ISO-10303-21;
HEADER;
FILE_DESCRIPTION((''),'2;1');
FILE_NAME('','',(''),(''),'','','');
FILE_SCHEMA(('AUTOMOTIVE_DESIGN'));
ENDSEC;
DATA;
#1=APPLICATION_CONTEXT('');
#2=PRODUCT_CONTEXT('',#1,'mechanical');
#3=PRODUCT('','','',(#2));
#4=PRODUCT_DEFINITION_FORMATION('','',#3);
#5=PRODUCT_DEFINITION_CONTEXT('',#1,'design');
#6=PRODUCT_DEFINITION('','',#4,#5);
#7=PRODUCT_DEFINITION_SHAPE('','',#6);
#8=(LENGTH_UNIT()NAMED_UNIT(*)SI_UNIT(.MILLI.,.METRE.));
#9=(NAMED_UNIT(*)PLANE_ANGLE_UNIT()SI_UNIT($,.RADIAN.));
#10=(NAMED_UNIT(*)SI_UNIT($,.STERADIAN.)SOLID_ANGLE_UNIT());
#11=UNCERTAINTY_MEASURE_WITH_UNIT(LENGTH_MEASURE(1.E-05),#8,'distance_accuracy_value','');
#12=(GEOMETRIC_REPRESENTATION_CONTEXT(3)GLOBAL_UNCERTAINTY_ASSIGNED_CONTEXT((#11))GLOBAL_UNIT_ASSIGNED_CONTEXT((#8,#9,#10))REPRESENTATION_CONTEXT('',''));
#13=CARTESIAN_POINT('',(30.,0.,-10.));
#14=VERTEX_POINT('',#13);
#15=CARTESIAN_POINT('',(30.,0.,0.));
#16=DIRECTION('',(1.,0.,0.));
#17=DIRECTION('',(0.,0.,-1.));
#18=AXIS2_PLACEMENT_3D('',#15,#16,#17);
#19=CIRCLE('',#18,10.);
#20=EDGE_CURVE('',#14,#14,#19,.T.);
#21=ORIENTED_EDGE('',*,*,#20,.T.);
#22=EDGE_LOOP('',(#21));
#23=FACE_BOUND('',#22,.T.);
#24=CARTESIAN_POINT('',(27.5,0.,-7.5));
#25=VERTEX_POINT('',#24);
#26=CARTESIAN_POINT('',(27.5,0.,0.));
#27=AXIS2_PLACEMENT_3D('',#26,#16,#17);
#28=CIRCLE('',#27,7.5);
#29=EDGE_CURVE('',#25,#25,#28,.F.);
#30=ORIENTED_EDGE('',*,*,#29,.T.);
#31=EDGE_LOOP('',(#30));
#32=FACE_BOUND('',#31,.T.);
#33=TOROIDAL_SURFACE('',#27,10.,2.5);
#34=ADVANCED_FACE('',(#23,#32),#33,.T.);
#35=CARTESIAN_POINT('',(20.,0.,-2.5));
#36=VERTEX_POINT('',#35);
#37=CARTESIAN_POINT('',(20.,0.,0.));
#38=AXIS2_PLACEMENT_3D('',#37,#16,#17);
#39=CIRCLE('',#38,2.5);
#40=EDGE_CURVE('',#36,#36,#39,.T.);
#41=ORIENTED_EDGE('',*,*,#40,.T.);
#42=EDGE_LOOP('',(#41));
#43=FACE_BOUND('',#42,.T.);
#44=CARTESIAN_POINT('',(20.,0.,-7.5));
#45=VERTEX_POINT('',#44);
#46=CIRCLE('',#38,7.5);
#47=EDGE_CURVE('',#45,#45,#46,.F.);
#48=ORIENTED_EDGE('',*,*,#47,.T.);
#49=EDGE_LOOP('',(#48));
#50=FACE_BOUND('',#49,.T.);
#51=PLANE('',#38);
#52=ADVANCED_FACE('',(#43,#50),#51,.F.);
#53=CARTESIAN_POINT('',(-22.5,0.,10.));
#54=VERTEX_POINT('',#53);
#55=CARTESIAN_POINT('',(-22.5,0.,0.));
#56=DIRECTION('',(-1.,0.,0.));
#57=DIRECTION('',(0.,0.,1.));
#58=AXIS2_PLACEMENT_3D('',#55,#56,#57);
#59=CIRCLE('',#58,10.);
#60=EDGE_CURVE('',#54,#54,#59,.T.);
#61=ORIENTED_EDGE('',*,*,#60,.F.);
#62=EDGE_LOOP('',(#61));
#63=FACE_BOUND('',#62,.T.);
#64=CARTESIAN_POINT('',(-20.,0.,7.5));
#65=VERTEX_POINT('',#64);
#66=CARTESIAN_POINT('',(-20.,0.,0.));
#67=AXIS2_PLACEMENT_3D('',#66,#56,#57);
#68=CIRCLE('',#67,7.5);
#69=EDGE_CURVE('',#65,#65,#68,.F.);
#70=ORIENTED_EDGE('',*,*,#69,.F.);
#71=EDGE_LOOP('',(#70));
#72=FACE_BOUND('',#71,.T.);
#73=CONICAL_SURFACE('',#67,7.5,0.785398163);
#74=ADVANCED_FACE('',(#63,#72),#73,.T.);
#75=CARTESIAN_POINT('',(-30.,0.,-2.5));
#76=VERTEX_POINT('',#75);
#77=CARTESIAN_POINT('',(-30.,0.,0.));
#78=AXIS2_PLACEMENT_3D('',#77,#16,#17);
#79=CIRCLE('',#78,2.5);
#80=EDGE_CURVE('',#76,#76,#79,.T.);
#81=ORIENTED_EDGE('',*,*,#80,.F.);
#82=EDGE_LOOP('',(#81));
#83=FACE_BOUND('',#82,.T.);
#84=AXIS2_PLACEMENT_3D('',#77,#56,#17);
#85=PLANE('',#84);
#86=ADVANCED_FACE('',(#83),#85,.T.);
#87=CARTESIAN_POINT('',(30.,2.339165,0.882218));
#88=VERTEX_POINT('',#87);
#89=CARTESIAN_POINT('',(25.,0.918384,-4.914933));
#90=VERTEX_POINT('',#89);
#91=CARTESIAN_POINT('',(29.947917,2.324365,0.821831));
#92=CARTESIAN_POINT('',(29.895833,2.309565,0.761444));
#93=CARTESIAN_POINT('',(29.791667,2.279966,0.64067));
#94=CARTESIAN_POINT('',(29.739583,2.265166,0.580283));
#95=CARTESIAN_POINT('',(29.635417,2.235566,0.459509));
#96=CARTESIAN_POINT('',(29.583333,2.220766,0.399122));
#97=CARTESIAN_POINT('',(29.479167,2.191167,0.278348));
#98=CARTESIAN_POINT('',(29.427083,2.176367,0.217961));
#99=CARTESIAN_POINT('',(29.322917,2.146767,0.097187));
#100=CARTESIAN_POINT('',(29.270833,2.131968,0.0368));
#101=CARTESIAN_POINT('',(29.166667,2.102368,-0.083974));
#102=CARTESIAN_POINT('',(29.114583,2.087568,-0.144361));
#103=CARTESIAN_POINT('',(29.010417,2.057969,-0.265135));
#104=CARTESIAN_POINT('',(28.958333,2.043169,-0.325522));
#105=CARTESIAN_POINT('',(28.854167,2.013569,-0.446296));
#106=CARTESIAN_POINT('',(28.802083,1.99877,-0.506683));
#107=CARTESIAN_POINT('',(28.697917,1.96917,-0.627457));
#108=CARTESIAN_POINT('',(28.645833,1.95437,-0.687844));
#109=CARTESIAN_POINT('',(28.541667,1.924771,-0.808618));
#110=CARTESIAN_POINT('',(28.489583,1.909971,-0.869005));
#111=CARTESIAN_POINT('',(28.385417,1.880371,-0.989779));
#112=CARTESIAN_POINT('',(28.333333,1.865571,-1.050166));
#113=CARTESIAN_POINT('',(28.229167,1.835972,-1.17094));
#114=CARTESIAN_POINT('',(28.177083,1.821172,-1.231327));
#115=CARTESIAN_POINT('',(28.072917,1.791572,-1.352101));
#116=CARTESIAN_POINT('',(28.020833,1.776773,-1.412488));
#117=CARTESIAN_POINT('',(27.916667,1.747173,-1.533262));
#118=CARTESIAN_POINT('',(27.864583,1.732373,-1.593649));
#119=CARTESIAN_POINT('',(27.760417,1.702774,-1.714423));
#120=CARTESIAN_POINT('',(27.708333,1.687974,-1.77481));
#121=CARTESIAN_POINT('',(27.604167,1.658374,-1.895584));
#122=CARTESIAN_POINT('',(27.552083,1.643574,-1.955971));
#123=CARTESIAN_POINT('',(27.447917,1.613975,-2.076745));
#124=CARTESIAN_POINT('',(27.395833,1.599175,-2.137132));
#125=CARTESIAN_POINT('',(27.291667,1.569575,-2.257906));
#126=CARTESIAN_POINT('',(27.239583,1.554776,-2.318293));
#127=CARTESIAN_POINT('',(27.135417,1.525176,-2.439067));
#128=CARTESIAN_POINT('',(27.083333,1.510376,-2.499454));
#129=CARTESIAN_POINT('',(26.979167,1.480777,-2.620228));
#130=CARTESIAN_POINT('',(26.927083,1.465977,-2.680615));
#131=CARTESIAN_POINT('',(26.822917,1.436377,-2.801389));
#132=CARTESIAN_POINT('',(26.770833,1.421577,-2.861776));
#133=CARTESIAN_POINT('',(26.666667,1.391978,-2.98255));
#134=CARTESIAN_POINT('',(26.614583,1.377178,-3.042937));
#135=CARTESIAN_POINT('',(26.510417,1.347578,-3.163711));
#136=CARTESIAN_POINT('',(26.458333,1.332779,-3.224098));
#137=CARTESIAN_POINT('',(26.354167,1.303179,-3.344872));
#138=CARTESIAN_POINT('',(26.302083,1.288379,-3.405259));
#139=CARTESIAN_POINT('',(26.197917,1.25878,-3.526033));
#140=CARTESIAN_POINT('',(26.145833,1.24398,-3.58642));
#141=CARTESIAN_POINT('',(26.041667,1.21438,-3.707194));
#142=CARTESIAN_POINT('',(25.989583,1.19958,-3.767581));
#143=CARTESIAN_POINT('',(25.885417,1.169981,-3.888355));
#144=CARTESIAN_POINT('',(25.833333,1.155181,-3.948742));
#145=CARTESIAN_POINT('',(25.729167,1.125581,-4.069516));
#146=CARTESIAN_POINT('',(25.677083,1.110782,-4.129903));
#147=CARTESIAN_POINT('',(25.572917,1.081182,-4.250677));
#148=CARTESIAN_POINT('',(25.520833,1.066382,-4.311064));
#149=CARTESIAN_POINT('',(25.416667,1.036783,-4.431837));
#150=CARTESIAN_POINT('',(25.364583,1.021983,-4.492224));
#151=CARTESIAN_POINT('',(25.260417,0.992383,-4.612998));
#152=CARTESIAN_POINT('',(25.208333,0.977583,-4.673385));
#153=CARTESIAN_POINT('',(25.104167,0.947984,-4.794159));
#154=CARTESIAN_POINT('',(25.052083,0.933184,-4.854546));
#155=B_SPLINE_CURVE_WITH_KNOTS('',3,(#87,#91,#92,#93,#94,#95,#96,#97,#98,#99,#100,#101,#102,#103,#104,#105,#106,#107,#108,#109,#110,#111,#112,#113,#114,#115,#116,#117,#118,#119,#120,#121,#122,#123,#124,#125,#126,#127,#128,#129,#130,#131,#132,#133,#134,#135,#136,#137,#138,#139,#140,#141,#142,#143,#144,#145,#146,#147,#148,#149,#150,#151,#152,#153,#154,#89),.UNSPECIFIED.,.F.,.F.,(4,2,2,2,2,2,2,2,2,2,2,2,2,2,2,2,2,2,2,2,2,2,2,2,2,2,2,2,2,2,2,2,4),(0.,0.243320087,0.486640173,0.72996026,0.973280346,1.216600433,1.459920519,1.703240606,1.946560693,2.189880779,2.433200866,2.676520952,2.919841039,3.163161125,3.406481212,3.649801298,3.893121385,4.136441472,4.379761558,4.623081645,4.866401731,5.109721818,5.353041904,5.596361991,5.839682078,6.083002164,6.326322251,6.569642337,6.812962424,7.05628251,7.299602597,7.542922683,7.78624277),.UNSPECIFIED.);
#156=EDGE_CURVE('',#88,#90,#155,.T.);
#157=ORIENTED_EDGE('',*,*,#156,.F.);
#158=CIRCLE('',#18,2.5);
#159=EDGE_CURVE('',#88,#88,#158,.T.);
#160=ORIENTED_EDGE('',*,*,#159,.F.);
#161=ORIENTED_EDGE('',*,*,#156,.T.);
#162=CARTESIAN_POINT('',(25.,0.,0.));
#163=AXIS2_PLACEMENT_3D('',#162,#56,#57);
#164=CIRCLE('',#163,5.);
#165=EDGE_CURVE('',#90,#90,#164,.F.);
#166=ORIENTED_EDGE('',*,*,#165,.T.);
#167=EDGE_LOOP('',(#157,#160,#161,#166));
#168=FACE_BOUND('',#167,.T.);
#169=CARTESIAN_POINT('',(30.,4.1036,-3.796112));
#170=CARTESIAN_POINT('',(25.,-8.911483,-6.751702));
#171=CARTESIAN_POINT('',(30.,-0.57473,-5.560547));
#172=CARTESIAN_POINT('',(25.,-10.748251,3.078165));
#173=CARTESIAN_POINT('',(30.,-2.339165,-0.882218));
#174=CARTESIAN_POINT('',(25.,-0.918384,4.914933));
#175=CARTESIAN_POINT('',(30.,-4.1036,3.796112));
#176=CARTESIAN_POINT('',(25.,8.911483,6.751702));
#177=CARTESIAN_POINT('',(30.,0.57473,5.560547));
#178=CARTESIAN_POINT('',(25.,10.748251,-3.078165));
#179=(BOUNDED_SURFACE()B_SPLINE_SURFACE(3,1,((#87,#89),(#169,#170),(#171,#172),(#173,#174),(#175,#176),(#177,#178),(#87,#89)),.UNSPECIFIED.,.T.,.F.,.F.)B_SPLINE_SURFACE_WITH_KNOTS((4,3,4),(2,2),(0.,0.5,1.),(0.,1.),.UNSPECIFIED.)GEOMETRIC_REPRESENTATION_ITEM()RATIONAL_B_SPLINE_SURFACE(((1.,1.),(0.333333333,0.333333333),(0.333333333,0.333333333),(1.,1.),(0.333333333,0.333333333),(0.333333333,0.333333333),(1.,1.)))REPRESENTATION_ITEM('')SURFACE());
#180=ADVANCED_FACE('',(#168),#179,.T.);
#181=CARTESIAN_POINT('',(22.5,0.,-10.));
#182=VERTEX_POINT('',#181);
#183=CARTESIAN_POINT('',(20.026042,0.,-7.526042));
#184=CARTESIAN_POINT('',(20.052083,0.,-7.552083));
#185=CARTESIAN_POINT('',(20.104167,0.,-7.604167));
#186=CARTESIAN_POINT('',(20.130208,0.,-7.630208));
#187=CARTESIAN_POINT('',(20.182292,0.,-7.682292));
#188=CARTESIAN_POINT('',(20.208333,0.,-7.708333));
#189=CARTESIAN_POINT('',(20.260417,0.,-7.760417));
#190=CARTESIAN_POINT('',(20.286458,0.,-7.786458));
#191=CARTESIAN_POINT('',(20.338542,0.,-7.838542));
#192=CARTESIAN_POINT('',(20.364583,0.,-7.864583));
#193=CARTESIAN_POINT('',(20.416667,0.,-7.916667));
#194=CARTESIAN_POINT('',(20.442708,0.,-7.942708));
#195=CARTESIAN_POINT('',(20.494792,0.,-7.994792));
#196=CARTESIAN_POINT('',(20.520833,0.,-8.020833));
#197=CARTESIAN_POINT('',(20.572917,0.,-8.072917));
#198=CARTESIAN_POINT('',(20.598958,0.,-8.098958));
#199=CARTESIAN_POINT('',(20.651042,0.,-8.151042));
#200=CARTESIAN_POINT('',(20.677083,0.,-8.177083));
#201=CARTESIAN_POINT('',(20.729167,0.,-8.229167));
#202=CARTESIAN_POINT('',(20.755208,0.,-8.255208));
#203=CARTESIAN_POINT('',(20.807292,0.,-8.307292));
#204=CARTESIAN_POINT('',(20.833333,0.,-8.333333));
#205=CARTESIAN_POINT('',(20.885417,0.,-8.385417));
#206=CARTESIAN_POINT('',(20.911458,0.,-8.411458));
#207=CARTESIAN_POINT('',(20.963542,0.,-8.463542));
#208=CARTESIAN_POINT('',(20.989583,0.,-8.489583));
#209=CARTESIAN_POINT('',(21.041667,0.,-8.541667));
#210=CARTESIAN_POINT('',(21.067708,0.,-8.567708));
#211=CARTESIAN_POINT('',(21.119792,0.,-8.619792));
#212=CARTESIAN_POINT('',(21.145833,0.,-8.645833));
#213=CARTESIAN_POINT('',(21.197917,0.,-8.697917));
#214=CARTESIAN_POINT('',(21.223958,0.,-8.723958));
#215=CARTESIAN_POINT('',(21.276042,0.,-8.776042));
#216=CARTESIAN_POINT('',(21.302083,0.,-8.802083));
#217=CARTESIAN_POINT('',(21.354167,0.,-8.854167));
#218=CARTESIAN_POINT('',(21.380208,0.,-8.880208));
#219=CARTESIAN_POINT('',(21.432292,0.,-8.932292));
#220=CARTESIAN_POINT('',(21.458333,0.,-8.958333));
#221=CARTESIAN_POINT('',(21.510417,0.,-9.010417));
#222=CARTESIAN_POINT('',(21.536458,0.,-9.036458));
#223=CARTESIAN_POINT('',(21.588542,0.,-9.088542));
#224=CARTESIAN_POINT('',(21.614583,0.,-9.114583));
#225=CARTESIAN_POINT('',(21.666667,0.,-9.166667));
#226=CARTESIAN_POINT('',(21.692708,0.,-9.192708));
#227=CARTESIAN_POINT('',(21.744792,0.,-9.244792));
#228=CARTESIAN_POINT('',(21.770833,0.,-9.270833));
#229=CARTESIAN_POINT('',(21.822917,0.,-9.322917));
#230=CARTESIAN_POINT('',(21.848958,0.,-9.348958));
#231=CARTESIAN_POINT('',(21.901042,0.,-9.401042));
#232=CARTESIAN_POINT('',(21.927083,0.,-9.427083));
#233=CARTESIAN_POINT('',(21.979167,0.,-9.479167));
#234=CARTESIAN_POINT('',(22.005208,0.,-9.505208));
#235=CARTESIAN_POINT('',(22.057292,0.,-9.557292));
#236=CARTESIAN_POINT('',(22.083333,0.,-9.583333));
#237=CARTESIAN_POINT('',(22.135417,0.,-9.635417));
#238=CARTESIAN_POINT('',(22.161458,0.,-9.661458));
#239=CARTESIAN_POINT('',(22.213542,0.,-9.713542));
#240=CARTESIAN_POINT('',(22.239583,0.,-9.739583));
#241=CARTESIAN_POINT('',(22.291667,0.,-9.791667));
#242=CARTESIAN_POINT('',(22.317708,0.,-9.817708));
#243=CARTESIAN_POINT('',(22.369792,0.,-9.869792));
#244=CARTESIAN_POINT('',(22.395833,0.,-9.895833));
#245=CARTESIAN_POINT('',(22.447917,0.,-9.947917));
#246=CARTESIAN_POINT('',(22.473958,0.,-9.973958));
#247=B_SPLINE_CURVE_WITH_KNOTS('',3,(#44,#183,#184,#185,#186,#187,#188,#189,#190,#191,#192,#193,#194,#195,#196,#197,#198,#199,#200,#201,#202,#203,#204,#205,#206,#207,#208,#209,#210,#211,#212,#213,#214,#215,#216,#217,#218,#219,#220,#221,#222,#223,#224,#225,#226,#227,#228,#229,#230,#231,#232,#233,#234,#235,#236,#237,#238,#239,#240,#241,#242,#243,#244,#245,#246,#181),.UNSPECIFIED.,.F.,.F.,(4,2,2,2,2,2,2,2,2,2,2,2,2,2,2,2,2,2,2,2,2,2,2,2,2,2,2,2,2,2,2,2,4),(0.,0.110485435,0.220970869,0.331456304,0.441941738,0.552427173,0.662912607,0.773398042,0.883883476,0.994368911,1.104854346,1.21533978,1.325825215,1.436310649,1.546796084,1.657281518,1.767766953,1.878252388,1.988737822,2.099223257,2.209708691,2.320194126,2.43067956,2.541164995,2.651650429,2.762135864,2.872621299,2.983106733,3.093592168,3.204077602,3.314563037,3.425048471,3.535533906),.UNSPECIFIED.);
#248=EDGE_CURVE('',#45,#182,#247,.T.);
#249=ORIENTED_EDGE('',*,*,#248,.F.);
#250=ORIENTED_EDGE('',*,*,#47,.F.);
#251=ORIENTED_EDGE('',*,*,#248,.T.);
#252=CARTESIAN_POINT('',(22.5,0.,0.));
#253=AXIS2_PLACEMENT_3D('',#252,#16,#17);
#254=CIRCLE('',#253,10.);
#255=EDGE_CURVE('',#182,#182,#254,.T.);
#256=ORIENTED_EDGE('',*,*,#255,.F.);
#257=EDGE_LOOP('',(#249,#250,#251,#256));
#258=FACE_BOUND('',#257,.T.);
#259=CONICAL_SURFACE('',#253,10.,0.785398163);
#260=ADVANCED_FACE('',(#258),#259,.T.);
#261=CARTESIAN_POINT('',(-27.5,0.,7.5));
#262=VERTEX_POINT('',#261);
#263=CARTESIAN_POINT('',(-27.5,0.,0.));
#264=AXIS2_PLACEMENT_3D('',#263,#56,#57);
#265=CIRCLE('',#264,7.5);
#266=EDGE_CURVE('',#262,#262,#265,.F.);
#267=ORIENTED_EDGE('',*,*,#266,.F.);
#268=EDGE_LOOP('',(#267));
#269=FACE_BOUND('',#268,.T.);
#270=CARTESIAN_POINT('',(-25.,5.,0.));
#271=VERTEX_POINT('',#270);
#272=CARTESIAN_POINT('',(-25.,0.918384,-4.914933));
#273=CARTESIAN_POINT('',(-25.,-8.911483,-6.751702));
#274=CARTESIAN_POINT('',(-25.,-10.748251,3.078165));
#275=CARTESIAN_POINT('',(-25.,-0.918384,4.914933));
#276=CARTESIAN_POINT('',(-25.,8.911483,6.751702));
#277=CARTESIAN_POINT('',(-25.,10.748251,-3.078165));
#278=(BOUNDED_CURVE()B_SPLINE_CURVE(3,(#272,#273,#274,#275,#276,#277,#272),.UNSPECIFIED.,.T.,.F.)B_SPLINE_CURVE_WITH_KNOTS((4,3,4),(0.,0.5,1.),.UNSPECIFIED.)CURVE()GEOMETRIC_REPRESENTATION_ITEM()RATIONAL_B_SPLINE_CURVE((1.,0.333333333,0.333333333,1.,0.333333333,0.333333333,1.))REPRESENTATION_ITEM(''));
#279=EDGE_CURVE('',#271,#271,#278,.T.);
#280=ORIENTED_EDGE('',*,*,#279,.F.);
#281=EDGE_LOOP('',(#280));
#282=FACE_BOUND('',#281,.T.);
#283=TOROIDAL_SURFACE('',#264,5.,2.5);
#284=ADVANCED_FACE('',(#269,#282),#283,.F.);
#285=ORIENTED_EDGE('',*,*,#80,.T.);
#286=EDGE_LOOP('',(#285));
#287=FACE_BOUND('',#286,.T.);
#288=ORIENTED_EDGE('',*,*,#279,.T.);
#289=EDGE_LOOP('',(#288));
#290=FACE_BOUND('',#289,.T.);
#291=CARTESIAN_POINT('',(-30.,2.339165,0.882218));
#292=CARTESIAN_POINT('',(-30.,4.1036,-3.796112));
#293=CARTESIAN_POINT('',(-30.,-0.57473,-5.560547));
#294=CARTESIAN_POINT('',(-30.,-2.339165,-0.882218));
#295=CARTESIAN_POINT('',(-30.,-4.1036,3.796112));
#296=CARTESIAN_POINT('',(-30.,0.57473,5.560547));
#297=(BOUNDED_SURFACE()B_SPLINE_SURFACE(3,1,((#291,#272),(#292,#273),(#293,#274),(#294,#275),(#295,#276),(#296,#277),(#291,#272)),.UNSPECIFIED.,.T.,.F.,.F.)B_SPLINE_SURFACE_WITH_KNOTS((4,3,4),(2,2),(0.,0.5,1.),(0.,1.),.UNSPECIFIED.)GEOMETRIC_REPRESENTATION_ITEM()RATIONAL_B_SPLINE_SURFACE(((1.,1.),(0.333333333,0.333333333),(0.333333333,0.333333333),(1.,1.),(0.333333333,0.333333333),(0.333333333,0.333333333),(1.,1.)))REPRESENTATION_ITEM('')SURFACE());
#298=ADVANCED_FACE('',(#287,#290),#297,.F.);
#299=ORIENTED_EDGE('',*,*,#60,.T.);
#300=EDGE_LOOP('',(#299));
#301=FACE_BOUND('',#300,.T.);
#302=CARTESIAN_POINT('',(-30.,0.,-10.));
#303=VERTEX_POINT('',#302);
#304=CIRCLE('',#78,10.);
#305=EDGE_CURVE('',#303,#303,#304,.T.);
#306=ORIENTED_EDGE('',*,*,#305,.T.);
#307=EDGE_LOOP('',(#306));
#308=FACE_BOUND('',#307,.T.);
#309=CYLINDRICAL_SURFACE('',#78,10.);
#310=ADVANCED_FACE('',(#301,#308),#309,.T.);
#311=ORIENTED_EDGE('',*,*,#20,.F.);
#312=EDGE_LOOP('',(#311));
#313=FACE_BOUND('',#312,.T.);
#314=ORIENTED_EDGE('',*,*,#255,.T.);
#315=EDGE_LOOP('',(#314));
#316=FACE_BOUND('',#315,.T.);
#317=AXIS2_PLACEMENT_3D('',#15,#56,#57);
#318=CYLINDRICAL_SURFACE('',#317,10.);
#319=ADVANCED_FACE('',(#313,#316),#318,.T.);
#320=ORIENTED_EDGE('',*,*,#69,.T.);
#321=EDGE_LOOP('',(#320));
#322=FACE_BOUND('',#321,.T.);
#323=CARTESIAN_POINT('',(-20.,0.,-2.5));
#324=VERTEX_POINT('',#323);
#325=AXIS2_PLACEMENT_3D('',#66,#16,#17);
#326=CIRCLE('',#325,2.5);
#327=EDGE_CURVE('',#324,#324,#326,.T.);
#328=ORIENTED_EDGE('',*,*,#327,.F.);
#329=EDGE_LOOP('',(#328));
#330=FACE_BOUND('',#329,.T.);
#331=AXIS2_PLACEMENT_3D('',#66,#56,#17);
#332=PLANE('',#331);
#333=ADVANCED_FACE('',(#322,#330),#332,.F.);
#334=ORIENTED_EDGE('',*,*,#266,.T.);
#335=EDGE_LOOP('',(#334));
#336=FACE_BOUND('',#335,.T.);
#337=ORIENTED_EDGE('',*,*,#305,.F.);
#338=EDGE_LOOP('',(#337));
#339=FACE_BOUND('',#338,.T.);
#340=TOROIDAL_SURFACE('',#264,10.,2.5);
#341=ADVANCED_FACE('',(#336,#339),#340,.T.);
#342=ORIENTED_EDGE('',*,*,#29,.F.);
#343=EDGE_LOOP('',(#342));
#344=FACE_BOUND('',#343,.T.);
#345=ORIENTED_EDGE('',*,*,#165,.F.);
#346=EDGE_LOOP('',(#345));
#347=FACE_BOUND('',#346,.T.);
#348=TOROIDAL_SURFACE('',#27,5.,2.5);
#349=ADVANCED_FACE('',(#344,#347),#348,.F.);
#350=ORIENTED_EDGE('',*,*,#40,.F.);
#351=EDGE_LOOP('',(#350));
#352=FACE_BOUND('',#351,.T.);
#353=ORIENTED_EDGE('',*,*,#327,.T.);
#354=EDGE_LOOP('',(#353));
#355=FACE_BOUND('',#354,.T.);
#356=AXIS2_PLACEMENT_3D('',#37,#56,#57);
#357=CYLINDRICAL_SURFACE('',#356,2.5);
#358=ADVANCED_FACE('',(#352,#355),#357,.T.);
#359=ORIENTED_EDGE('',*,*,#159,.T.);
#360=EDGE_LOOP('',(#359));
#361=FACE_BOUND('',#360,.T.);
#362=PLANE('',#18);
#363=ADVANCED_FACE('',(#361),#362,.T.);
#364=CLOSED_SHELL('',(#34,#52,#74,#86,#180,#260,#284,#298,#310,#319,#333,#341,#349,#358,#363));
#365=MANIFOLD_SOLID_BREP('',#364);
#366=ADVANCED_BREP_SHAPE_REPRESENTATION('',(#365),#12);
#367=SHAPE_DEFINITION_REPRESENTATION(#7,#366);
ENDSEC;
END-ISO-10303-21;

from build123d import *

# Parameters (mm, degrees)
SKETCH1_R           = 2.5
BOSS_EXTRUDE1_DEPTH = 20
SKETCH2_R           = 10
BOSS_EXTRUDE2_DEPTH = 10
SKETCH3_R           = 7.5
CUT_EXTRUDE1_DEPTH  = 5
FILLET1_R           = 2.5
FILLET2_R           = 2.5
CHAMFER1_SIZE       = 2.5


with BuildPart() as part:
    # Sketch1 → Boss-Extrude1 (new body)
    with BuildSketch(Plane(origin=(0, 0, 0), x_dir=(0, 0, -1), z_dir=(1, 0, 0))):
        Circle(SKETCH1_R)
    boss_extrude1 = extrude(amount=BOSS_EXTRUDE1_DEPTH)

    # Sketch2 → Boss-Extrude2 (add)
    with BuildSketch(Plane(origin=(20, 0, 0), x_dir=(0, 0, -1), z_dir=(1, 0, 0))):
        Circle(SKETCH2_R)
    boss_extrude2 = extrude(amount=BOSS_EXTRUDE2_DEPTH)

    # Sketch3 → Cut-Extrude1 (cut)
    with BuildSketch(Plane(origin=(30, 0, 0), x_dir=(0, 0, -1), z_dir=(1, 0, 0))):
        Circle(SKETCH3_R)
    cut_extrude1 = extrude(amount=-CUT_EXTRUDE1_DEPTH, mode=Mode.SUBTRACT)

    # Loft1: read off the stored shape, not the designer's step
    # Loft1: loft between two sections, ruled curve by curve
    loft1_from = [
        Edge.make_bspline([(30, 2.339164852, 0.882217543), (30, 4.103599939, -3.796112162), (30, -0.574729766, -5.560547248), (30, -2.339164852, -0.882217543), (30, -4.103599939, 3.796112162), (30, 0.574729766, 5.560547248), (30, 2.339164852, 0.882217543)], [0, 0, 0, 0, 0.5, 0.5, 0.5, 1, 1, 1, 1], 3, [1, 0.333333333, 0.333333333, 1, 0.333333333, 0.333333333, 1]),
    ]
    loft1_to = [
        Edge.make_bspline([(25, 0.918384281, -4.914933399), (25, -8.911482517, -6.75170196), (25, -10.748251078, 3.078164838), (25, -0.918384281, 4.914933399), (25, 8.911482517, 6.75170196), (25, 10.748251078, -3.078164838), (25, 0.918384281, -4.914933399)], [0, 0, 0, 0, 0.5, 0.5, 0.5, 1, 1, 1, 1], 3, [1, 0.333333333, 0.333333333, 1, 0.333333333, 0.333333333, 1]),
    ]
    loft1 = Solid(Shell([*[Face.make_surface_from_curves(loft1_from[k], loft1_to[k]) for k in range(1)], Face(Wire(loft1_from)), Face(Wire(loft1_to))]))
    add(loft1)

    # Mirror1: Boss-Extrude1, Boss-Extrude2, Cut-Extrude1, Loft1 across plane
    add(boss_extrude1.mirror(Plane(origin=(0, 0, 0), x_dir=(0, 0, 1), z_dir=(1, 0, 0))))
    add(boss_extrude2.mirror(Plane(origin=(0, 0, 0), x_dir=(0, 0, 1), z_dir=(1, 0, 0))))
    add(cut_extrude1.mirror(Plane(origin=(0, 0, 0), x_dir=(0, 0, 1), z_dir=(1, 0, 0))), mode=Mode.SUBTRACT)
    add(loft1.mirror(Plane(origin=(0, 0, 0), x_dir=(0, 0, 1), z_dir=(1, 0, 0))))

    # Fillet1
    fillet1_edges = [part.edges().sort_by_distance(p)[0] for p in [
        (25, 0, 7.5),
        (30, 0, 7.5),
    ]]
    fillet(fillet1_edges, radius=FILLET1_R - 0.0001)  # a hair under: the kernel refuses the full size

    # Fillet2
    fillet2_edges = [part.edges().sort_by_distance(p)[0] for p in [
        (-30, 0, 7.5),
        (-25, 0, 7.5),
    ]]
    fillet(fillet2_edges, radius=FILLET2_R - 0.0001)  # a hair under: the kernel refuses the full size

    # Chamfer1
    chamfer1_edges = [part.edges().sort_by_distance(p)[0] for p in [
        (-20, 0, 10),
        (20, 0, 10),
    ]]
    chamfer(chamfer1_edges, length=CHAMFER1_SIZE)


solid = part.part
